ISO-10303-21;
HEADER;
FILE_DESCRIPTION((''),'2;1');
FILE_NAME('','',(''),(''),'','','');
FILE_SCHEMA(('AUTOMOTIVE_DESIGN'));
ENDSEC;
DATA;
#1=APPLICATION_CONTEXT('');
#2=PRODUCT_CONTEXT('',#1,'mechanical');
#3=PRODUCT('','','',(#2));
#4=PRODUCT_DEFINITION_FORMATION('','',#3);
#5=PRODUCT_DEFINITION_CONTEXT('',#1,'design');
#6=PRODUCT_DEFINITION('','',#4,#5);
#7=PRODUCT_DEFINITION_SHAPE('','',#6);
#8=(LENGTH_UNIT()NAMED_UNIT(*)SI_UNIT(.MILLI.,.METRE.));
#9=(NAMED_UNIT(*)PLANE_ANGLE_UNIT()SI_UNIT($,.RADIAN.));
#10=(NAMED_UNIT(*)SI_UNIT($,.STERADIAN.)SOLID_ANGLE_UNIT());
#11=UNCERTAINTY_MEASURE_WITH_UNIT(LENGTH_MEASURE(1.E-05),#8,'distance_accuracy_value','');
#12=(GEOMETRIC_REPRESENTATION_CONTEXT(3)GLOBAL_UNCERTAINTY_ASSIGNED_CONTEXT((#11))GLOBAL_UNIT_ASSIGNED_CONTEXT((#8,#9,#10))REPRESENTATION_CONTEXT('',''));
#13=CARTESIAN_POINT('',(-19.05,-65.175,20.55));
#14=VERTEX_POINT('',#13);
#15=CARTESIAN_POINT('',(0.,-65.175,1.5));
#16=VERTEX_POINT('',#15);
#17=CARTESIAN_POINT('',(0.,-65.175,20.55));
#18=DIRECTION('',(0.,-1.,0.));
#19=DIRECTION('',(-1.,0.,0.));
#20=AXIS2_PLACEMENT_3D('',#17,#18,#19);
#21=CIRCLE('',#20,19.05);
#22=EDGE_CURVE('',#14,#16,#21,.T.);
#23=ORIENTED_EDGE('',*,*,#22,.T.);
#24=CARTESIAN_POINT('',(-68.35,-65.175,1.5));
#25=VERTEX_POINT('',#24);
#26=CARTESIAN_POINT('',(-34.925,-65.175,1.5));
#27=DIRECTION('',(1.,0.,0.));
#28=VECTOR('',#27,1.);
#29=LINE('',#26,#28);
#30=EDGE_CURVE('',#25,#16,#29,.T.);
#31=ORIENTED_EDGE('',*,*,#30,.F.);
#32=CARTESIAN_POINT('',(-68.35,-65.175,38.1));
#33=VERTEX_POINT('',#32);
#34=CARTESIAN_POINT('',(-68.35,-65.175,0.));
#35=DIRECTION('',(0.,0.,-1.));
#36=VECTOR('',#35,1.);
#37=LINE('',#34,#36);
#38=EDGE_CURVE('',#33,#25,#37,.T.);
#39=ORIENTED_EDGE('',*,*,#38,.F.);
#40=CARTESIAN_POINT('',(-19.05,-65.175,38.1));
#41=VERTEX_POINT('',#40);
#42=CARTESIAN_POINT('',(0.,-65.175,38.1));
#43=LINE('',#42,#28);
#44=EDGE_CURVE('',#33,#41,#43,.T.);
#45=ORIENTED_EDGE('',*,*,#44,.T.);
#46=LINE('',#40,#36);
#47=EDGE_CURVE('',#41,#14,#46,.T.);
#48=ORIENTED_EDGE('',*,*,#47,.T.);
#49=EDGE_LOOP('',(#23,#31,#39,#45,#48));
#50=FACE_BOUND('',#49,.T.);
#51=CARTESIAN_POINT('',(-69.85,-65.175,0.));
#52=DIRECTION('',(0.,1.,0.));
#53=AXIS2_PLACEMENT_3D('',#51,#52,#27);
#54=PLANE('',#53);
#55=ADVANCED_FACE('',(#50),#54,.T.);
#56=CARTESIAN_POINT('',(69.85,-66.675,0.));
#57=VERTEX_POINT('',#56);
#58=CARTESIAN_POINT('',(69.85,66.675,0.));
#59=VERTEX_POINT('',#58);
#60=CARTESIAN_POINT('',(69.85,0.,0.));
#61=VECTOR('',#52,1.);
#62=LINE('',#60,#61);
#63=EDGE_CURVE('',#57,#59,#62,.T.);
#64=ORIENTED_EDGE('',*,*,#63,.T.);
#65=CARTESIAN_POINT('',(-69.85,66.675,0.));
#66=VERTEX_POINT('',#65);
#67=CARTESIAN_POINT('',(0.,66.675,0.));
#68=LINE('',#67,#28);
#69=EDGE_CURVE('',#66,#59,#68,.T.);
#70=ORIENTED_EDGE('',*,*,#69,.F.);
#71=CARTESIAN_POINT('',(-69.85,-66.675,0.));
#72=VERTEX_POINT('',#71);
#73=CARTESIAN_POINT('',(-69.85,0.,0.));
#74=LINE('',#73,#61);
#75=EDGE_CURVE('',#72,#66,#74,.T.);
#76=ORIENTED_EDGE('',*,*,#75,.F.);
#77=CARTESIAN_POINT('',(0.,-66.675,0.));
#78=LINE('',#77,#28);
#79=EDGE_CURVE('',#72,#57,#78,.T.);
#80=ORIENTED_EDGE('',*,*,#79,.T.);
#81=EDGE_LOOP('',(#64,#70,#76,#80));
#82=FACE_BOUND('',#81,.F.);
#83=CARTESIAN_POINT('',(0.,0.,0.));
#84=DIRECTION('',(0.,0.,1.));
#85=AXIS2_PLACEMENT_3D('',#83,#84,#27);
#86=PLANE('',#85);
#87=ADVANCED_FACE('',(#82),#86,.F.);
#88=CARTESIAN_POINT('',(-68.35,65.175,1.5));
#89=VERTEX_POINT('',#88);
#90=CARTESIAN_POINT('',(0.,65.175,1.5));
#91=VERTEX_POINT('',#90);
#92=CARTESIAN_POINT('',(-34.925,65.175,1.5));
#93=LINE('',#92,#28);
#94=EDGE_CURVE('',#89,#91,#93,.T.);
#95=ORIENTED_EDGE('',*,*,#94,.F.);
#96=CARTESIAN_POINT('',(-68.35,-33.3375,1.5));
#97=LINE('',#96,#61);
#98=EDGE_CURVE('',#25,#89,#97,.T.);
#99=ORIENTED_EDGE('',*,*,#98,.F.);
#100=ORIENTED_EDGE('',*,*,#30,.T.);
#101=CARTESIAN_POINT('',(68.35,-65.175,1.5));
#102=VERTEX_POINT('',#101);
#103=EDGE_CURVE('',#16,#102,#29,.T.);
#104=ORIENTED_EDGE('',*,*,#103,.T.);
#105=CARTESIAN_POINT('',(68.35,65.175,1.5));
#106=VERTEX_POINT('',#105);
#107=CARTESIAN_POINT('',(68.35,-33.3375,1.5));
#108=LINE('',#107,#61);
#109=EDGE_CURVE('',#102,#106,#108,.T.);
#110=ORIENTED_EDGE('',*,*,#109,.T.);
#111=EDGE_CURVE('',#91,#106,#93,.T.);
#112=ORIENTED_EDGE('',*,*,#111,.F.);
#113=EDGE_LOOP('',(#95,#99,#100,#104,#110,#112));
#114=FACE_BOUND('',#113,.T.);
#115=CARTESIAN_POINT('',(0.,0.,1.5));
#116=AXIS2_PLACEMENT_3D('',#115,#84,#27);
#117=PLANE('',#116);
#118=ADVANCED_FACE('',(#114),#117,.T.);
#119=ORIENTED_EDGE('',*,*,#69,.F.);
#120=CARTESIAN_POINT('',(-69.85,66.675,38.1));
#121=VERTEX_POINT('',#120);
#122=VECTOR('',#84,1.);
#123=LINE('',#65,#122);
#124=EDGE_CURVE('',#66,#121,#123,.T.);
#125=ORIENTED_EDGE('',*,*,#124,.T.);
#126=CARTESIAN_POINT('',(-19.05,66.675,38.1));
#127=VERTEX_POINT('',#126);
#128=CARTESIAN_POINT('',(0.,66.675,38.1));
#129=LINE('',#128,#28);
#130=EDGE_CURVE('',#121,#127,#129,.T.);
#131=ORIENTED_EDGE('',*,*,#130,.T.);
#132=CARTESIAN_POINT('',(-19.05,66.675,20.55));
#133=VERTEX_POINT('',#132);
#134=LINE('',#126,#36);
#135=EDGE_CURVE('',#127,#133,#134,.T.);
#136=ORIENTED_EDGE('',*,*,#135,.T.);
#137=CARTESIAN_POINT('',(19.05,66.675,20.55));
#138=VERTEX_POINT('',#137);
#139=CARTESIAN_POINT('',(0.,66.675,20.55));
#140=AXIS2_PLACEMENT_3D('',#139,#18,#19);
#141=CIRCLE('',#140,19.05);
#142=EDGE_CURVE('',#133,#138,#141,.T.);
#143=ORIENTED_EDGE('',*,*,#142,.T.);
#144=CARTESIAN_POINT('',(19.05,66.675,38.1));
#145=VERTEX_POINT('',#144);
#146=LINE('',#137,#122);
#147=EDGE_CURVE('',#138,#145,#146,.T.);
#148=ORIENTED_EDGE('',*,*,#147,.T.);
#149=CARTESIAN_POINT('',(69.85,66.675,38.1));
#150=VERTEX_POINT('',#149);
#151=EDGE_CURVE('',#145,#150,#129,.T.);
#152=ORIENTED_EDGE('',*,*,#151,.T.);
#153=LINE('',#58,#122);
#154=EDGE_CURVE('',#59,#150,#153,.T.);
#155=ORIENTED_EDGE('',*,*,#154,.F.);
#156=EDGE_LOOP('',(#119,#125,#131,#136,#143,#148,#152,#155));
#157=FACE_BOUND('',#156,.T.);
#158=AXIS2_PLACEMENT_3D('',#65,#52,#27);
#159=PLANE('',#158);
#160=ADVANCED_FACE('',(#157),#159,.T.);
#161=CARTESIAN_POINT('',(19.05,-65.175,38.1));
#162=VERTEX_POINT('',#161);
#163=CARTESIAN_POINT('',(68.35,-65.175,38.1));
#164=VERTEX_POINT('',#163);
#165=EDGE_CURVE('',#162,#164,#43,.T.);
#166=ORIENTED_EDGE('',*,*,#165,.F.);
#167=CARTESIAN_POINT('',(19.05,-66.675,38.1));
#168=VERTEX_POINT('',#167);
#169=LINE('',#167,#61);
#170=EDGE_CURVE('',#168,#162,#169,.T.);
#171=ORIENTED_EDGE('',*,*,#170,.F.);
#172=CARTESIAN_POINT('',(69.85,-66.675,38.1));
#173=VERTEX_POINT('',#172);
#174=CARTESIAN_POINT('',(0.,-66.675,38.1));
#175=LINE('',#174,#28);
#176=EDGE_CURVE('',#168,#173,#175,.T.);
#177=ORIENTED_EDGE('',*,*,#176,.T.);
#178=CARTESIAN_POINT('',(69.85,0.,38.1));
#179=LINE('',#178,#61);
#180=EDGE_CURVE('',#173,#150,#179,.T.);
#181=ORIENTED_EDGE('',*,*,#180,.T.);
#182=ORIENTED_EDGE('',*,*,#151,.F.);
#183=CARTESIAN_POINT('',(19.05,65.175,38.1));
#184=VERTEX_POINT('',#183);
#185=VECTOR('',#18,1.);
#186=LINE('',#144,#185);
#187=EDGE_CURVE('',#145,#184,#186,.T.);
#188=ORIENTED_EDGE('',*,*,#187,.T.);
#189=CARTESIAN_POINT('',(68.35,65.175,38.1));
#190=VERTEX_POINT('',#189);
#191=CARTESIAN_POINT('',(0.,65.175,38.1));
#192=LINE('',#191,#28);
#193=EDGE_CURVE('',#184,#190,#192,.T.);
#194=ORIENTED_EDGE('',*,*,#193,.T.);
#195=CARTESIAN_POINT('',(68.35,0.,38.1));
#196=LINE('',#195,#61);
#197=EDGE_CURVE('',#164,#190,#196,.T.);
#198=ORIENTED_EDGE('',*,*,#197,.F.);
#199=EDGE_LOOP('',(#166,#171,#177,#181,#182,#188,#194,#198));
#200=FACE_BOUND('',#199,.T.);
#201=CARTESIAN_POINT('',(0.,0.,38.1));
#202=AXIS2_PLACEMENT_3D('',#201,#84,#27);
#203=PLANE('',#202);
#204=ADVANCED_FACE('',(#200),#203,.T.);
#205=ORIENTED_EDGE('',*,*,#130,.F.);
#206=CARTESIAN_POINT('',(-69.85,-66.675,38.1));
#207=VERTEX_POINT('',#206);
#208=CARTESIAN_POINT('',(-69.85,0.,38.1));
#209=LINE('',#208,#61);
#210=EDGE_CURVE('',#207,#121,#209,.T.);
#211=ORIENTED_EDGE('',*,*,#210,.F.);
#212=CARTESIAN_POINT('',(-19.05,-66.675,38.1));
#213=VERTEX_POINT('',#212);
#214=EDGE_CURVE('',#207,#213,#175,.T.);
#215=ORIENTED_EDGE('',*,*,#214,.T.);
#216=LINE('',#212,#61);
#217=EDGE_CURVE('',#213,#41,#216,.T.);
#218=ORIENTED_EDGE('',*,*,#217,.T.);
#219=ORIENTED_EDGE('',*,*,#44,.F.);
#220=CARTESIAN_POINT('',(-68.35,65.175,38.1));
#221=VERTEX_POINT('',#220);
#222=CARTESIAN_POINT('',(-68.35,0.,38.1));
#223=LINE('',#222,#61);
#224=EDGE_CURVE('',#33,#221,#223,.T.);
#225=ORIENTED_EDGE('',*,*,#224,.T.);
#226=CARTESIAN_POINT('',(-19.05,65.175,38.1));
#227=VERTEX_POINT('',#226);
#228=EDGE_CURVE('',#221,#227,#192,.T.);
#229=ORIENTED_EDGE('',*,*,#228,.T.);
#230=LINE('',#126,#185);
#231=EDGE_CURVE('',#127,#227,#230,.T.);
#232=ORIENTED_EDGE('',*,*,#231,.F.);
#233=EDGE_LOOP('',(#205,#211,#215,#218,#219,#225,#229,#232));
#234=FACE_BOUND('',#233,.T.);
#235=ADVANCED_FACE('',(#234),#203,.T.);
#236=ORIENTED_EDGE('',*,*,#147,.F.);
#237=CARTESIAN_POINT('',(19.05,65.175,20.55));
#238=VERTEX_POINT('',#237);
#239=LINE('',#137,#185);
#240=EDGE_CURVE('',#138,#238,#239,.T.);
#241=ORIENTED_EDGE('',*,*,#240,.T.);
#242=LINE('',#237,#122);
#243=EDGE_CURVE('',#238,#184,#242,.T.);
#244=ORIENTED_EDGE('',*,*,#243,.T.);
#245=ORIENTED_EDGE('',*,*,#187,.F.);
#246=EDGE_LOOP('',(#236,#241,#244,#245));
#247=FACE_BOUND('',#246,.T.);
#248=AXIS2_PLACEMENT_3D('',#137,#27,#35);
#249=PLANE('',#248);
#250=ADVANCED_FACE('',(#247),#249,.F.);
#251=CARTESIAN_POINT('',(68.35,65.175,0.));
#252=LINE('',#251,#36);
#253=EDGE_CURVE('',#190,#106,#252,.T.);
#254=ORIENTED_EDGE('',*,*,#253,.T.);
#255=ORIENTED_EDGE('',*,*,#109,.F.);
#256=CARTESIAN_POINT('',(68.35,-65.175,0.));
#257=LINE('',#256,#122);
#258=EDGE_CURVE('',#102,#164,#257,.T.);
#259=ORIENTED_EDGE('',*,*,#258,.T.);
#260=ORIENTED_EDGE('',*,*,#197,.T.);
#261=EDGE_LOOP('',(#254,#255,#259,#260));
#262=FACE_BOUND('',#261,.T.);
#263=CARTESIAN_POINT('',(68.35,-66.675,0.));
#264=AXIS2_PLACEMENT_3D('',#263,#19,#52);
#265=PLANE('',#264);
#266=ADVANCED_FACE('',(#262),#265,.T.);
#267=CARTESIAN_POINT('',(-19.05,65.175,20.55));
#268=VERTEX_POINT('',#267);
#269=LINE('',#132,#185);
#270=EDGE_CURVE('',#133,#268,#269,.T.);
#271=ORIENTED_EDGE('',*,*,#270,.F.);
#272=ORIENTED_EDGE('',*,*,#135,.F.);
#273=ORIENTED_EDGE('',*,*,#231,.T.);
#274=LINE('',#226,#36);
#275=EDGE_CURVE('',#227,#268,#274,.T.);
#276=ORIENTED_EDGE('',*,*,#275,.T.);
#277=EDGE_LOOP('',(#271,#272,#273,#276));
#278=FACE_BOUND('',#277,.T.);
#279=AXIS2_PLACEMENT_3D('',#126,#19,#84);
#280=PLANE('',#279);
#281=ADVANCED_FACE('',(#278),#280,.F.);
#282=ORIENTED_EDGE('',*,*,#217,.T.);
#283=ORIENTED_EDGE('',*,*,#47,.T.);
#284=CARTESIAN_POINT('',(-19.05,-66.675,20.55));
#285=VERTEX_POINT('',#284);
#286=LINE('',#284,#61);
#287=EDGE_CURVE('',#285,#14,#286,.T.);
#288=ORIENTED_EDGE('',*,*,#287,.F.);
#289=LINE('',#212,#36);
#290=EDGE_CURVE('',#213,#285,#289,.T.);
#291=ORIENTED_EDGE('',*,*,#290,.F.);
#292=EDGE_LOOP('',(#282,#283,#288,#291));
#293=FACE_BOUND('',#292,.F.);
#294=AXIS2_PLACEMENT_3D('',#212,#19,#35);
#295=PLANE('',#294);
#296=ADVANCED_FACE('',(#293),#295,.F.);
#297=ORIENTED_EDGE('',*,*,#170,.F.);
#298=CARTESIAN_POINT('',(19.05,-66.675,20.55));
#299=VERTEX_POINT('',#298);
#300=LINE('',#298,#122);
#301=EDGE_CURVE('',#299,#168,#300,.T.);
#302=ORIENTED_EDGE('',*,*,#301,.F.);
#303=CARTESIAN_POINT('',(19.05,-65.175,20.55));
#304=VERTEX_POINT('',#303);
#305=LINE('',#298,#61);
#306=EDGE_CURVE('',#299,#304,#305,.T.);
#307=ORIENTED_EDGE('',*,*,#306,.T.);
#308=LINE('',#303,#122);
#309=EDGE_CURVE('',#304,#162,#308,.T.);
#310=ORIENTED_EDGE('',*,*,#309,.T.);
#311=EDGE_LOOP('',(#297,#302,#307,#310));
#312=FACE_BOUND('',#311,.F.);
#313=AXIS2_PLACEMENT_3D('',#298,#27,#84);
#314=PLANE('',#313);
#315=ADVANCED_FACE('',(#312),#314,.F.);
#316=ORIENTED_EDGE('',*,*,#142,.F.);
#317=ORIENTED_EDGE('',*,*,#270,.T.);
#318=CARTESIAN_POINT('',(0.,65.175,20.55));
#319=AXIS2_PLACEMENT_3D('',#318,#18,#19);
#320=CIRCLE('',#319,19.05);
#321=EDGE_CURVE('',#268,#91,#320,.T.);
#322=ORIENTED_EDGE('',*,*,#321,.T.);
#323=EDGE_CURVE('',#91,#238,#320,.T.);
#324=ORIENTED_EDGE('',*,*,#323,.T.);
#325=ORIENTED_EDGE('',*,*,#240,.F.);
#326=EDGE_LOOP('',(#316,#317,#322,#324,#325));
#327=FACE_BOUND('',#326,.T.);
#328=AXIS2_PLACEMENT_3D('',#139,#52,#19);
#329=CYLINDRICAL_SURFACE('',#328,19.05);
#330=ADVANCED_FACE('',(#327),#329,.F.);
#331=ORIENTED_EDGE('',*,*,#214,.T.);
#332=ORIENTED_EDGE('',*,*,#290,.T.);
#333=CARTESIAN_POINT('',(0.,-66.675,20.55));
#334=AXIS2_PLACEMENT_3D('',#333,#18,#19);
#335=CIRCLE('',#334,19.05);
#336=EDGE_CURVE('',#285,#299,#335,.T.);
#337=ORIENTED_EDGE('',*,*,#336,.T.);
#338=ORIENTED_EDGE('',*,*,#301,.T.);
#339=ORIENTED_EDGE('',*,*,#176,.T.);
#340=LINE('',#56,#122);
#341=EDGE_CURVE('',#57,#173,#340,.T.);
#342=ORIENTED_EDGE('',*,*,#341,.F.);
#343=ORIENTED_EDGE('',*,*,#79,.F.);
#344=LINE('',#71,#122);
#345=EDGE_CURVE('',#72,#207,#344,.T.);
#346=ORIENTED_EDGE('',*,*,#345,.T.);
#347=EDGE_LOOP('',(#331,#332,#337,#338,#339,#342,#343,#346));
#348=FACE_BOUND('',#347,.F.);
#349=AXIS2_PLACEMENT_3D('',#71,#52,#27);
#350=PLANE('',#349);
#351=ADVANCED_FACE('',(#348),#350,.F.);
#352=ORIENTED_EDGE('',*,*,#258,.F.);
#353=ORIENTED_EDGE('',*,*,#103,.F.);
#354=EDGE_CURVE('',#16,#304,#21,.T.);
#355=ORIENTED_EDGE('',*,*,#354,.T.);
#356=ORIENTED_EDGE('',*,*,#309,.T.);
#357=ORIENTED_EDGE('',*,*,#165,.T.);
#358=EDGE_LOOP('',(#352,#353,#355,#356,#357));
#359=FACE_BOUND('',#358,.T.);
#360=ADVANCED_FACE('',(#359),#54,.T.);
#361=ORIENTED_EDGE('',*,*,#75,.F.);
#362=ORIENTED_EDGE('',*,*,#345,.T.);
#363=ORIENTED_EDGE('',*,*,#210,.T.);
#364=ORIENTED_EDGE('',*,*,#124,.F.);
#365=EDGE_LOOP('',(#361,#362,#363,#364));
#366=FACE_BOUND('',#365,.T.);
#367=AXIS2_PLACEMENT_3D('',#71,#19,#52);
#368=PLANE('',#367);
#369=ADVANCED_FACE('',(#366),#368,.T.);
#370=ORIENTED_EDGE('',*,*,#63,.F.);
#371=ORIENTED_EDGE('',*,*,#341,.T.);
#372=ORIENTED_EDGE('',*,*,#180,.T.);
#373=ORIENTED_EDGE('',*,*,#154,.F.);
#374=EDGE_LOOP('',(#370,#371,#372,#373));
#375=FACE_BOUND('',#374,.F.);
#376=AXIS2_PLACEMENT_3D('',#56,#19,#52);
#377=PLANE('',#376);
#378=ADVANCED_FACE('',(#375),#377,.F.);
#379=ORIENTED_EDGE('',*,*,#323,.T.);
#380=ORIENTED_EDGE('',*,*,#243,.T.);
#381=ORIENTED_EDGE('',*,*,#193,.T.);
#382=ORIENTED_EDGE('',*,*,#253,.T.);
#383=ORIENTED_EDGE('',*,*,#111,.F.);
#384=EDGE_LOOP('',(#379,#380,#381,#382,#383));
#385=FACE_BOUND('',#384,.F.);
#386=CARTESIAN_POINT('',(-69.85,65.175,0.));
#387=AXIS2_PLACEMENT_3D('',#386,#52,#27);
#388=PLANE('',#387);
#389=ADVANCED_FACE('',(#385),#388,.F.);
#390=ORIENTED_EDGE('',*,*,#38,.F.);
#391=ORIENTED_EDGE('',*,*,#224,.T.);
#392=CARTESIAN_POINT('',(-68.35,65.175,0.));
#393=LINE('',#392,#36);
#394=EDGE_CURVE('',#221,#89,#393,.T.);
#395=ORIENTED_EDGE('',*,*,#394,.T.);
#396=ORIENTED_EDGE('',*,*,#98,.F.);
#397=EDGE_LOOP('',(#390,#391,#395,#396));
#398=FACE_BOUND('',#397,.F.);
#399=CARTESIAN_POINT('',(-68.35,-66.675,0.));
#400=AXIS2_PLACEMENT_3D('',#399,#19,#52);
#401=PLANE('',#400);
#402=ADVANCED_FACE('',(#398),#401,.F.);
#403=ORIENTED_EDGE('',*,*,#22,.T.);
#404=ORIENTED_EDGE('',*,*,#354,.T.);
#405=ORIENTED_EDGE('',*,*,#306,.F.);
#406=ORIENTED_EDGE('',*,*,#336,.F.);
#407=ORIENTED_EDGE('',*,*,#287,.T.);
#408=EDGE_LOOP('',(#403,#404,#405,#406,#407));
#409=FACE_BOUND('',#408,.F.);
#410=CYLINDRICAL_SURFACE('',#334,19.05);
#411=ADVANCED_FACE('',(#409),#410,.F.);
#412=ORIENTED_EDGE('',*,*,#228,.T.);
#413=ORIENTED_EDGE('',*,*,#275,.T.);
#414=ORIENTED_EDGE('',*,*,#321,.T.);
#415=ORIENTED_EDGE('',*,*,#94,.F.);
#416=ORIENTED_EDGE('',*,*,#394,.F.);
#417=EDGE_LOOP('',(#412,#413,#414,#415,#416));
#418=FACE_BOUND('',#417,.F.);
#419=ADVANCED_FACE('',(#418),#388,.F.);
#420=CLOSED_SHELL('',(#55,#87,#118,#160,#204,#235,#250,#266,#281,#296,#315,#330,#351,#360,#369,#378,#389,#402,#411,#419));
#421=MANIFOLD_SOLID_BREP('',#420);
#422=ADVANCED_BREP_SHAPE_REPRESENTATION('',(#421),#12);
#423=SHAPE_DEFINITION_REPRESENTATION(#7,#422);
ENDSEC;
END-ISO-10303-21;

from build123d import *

# Parameters (mm, degrees)
F0_W     = 139.7
F0_H     = 133.35
F1_DEPTH = 38.1
F2_T     = -1.5
F4_DEPTH = 1.5


# Not quite as in the source:
# - a pattern or mirror of a feature is missing from the dataset's text; its kind, count and spacing are read off the source's solid


with BuildPart() as f1:
    # F0 (on Top) → F1 (new body)
    with BuildSketch(Plane.XY):
        Rectangle(F0_W, F0_H)
    extrude(amount=F1_DEPTH)

    # F2
    f2_openings = [f1.faces().sort_by_distance(p)[0] for p in [
        (0, 0, 38.1),
    ]]
    offset(amount=F2_T, openings=f2_openings)

    # F3 (on face) → F4 (cut)
    with BuildSketch(Plane.XZ.offset(66.675)):
        with BuildLine():
            Line((19.05, 20.55), (-19.05, 20.55))
            ThreePointArc((-19.05, 20.55), (0, 1.5), (19.05, 20.55))
        make_face()
        with BuildLine():
            Line((-19.05, 38.1), (-19.05, 20.55))
            ThreePointArc((-19.05, 20.55), (-15.8753360228, 31.0797771184), (-7.4094534211, 38.1))
            Line((-7.4094534211, 38.1), (-19.05, 38.1))
        make_face()
        with BuildLine():
            ThreePointArc((-7.4094534211, 38.1), (-15.8753360228, 31.0797771184), (-19.05, 20.55))
            Line((-19.05, 20.55), (19.05, 20.55))
            ThreePointArc((19.05, 20.55), (15.8753360228, 31.0797771184), (7.4094534211, 38.1))
            Line((7.4094534211, 38.1), (-7.4094534211, 38.1))
        make_face()
        with BuildLine():
            ThreePointArc((7.4094534211, 38.1), (15.8753360228, 31.0797771184), (19.05, 20.55))
            Line((19.05, 20.55), (19.05, 38.1))
            Line((19.05, 38.1), (7.4094534211, 38.1))
        make_face()
        with BuildLine():
            ThreePointArc((7.4094534211, 38.1), (0, 39.6), (-7.4094534211, 38.1))
            Line((-7.4094534211, 38.1), (7.4094534211, 38.1))
        make_face()
    f4 = extrude(amount=-F4_DEPTH, mode=Mode.SUBTRACT)

    # F4_copies: F4 across plane
    add(f4.mirror(Plane.ZX), mode=Mode.SUBTRACT)


solid = f1.part
